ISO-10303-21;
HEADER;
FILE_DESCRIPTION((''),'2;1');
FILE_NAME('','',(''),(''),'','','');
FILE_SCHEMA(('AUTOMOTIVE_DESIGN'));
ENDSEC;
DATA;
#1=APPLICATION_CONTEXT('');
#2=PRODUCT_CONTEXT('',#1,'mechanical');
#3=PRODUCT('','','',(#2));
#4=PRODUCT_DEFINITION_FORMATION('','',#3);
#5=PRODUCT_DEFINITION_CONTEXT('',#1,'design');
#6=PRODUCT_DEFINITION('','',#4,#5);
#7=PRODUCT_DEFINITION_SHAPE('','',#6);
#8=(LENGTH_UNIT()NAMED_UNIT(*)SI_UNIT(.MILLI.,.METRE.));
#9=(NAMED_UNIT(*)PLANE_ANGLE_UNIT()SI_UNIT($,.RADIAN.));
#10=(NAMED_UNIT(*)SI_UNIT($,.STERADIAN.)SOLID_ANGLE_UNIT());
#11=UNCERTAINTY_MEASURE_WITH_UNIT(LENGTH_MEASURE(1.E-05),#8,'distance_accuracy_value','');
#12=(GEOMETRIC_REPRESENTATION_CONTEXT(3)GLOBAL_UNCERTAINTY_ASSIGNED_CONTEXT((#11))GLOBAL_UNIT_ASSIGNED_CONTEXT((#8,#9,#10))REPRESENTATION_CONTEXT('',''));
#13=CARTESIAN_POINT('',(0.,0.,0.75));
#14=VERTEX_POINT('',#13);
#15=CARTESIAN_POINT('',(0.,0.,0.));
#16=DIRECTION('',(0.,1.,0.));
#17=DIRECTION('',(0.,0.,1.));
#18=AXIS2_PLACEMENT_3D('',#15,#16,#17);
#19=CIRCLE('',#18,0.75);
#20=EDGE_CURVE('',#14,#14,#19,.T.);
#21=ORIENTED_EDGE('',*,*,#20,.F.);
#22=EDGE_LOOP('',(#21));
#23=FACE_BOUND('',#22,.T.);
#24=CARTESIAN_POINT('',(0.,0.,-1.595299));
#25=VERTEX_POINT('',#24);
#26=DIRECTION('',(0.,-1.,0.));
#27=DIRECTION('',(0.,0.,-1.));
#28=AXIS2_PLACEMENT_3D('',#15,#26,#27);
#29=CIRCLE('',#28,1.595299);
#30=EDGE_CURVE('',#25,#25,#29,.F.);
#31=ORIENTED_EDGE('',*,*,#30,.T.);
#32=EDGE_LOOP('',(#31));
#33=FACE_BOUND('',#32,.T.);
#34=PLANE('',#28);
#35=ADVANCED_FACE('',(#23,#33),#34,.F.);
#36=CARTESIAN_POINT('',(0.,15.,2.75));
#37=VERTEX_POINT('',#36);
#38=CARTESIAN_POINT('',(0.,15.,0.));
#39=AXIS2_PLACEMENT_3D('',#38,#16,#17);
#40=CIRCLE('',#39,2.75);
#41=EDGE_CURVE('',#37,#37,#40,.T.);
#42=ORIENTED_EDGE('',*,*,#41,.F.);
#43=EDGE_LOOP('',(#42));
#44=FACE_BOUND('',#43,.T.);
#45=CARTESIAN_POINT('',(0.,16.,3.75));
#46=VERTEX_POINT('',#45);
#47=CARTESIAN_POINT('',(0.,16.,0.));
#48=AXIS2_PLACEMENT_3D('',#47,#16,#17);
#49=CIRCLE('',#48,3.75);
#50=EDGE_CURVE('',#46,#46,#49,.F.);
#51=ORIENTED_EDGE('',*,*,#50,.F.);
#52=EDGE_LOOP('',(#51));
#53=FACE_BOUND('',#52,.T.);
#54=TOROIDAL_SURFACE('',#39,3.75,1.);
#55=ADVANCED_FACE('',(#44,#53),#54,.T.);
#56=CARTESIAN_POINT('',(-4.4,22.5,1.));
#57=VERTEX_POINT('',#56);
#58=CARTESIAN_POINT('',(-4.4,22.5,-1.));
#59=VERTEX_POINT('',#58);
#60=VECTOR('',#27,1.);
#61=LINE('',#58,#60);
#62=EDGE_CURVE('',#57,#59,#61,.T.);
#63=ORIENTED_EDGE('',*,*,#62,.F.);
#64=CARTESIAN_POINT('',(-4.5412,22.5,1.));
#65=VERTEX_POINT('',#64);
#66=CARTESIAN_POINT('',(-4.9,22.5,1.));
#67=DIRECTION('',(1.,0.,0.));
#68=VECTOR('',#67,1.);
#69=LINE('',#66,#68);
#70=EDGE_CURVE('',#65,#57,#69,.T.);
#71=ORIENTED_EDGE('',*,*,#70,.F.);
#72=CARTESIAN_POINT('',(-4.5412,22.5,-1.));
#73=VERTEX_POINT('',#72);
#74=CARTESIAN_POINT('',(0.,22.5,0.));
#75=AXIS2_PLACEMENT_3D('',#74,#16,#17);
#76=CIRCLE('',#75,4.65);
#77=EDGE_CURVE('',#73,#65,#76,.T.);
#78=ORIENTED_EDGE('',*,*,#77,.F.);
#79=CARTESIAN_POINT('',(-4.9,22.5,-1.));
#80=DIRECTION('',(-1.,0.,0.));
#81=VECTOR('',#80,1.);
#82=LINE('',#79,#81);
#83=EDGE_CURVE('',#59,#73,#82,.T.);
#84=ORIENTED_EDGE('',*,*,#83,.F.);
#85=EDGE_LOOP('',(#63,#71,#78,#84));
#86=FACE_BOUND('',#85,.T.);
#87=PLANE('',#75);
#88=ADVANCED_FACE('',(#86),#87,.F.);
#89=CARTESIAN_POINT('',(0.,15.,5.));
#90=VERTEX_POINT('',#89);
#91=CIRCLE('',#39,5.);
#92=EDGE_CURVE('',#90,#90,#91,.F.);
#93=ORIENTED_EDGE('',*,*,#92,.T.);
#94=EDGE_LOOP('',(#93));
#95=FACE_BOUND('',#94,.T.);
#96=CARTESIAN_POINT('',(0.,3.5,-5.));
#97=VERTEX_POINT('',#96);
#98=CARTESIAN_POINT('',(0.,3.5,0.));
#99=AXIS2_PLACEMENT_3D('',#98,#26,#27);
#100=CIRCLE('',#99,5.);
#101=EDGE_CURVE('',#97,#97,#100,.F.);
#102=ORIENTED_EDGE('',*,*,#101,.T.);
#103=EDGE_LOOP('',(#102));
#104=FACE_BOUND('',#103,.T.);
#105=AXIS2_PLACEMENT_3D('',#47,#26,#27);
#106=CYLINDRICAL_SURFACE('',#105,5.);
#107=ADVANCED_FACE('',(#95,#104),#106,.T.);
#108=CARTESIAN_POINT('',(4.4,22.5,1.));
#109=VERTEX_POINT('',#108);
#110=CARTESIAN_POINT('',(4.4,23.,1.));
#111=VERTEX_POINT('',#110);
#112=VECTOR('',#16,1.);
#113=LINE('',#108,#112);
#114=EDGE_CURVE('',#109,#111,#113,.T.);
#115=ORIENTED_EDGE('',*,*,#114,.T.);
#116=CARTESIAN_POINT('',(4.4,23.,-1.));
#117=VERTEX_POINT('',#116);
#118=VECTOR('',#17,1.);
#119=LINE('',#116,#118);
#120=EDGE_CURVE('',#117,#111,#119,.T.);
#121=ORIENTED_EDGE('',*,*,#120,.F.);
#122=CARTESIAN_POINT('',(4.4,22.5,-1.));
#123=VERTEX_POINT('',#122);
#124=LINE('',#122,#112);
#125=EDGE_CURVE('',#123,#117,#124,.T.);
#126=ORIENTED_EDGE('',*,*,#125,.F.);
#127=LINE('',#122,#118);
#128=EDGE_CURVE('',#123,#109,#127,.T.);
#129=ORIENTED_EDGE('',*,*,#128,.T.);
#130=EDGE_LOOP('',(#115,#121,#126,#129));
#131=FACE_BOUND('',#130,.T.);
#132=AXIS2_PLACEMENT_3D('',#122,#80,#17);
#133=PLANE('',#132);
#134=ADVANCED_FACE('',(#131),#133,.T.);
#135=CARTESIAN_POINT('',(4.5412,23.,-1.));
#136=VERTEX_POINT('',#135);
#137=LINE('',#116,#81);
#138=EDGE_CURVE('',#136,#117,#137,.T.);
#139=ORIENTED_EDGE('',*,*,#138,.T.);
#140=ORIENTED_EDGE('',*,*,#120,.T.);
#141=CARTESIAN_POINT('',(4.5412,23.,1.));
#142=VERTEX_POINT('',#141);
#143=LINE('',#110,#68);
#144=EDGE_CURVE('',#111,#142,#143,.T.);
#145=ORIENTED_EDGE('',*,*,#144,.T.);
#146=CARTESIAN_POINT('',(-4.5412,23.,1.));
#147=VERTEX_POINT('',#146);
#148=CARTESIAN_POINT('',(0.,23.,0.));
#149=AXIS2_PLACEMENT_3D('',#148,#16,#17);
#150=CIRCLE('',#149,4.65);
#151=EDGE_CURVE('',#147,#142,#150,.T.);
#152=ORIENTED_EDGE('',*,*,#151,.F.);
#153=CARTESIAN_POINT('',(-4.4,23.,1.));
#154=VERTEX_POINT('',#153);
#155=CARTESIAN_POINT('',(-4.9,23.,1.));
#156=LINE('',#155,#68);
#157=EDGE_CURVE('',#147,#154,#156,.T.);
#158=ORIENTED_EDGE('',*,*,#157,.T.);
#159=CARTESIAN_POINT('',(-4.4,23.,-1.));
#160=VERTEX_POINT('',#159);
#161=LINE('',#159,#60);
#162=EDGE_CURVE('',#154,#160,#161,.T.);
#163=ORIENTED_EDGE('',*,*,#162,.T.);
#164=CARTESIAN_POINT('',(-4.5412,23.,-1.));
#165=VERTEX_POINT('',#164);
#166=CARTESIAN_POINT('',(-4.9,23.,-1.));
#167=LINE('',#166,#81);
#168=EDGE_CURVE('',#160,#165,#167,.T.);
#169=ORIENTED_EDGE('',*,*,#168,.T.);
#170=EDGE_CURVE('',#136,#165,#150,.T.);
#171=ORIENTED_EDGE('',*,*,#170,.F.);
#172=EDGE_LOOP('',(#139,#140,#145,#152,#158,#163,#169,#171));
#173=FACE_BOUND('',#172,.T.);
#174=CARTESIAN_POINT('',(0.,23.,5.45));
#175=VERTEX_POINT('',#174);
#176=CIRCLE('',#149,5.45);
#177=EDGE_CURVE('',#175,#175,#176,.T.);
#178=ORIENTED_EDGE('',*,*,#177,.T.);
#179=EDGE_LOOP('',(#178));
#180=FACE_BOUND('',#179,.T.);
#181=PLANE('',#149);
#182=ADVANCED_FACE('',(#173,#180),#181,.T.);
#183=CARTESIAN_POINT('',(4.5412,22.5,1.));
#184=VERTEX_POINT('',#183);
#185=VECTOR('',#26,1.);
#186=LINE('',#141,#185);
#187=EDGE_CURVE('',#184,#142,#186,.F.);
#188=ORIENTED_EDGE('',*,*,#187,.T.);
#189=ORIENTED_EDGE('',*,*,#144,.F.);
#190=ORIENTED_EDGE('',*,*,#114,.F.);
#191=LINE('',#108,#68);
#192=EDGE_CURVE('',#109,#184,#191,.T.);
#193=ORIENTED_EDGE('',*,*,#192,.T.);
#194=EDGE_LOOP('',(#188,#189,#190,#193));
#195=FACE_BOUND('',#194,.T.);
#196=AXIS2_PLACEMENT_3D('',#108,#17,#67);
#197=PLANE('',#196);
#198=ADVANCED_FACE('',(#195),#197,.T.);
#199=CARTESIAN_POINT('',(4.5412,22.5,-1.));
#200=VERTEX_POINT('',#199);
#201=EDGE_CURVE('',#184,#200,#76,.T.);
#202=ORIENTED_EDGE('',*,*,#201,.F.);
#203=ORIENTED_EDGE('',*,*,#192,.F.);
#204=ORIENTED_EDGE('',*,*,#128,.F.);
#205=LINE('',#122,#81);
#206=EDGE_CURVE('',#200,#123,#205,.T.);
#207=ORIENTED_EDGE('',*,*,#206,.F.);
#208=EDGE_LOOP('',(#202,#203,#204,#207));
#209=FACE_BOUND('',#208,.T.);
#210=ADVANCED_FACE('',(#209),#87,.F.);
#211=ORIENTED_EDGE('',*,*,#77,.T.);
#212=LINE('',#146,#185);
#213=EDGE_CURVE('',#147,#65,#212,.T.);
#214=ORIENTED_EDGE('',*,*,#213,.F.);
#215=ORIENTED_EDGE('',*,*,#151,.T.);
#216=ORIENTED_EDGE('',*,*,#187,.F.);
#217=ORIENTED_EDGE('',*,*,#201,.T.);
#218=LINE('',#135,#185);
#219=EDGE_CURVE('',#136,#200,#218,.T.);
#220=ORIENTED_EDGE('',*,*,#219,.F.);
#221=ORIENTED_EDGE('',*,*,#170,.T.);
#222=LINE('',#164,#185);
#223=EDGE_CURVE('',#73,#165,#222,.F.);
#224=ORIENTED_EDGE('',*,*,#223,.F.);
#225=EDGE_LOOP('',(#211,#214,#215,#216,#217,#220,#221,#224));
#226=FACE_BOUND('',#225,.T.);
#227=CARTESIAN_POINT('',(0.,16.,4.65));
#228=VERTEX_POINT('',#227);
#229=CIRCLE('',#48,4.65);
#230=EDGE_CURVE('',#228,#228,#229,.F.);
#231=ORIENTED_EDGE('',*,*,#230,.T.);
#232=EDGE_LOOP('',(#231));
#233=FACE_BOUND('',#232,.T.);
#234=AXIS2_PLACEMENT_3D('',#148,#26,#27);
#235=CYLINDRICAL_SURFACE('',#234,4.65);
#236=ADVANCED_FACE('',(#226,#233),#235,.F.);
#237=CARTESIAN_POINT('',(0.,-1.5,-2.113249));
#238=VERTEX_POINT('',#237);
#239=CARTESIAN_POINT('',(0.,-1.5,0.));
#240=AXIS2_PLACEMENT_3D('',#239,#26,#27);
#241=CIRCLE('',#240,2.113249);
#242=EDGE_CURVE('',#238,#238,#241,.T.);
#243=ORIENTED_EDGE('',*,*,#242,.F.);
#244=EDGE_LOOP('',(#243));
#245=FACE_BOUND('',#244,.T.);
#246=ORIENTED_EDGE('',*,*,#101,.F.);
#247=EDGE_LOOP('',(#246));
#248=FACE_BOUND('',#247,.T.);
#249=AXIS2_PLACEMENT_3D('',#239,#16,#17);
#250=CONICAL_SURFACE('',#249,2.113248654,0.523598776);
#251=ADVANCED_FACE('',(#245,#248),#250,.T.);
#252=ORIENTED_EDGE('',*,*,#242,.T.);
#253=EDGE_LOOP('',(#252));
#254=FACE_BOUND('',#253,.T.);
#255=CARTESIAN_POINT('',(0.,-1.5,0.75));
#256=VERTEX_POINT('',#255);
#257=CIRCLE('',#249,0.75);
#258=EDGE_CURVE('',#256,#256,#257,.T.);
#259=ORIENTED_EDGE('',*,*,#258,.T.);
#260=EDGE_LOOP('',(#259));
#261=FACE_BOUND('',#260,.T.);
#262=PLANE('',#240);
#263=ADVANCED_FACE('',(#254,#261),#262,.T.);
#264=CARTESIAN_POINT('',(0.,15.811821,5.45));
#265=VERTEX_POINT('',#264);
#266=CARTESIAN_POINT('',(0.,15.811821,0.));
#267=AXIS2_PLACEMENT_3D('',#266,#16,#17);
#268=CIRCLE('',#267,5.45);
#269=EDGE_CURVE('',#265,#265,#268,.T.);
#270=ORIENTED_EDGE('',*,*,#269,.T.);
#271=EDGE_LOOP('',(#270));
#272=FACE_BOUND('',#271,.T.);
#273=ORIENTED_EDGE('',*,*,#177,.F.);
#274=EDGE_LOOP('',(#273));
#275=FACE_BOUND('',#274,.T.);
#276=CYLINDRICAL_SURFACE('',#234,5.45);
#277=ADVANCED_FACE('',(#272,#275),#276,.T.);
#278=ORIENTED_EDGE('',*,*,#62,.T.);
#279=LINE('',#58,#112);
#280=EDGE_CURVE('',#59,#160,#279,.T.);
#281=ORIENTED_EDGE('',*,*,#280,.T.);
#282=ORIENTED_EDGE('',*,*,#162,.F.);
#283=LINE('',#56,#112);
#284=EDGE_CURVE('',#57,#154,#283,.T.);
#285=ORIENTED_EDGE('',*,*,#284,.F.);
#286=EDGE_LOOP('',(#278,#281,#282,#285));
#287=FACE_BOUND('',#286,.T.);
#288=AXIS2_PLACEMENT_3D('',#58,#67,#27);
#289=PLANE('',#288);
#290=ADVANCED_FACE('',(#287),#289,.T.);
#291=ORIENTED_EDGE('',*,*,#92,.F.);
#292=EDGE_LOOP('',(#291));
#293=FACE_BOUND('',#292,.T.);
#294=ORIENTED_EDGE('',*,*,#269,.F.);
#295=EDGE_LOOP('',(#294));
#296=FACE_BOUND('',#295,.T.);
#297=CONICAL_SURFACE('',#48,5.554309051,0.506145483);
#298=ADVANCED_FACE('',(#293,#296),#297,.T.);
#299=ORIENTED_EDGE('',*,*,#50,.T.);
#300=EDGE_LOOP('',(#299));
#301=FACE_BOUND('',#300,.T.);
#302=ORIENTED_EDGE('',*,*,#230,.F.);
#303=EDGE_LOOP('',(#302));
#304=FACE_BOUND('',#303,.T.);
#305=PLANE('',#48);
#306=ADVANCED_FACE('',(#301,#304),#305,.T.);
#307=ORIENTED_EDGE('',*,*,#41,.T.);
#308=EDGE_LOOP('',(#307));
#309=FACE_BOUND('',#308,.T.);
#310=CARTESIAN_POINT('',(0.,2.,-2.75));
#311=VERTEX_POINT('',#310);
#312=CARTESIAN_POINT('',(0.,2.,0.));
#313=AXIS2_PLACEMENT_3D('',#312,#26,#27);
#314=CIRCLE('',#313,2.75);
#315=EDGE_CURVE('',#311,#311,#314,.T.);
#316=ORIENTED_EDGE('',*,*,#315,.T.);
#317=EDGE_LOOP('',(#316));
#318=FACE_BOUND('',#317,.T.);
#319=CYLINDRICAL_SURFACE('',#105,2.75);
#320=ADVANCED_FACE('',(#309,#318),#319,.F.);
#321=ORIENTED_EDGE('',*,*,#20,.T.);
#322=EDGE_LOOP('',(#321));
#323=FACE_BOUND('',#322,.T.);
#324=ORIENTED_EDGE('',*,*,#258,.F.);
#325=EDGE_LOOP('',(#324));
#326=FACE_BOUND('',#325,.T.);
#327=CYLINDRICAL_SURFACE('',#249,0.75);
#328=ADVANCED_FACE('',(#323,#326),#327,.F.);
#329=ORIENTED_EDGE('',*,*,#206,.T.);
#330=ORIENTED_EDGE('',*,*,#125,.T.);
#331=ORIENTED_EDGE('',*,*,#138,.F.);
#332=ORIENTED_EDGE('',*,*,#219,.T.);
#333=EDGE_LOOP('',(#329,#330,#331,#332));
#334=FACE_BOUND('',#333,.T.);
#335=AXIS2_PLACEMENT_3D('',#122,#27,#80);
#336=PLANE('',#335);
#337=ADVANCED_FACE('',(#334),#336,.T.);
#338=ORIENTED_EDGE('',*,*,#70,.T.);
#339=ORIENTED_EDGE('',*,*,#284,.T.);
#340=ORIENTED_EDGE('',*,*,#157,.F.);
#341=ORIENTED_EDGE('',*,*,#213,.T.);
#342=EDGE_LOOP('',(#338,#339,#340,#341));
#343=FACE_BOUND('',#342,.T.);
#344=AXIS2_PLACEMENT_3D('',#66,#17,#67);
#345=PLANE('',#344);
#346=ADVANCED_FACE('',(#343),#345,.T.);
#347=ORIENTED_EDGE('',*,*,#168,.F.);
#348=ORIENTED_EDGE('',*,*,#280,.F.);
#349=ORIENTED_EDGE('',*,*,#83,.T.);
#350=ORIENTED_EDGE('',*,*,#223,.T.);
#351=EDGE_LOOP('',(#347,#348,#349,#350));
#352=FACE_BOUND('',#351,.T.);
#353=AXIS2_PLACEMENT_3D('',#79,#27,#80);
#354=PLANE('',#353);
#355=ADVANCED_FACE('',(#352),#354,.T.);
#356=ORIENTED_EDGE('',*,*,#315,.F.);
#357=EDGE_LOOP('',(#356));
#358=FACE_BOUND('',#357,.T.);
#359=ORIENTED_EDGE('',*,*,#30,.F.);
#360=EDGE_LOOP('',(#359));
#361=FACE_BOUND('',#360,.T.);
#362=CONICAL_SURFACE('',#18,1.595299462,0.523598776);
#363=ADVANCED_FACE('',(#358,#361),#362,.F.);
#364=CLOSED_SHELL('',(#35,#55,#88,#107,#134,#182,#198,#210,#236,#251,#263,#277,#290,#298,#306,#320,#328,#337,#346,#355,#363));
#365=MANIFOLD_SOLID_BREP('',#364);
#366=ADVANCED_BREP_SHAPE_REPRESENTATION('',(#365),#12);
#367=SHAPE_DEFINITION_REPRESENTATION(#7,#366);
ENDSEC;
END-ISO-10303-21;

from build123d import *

# Parameters (mm, degrees)
SKETCH1_R           = 5
SKETCH1_R_2         = 2.75
BOSS_EXTRUDE1_DEPTH = 16
BOSS_EXTRUDE2_START = 1.5
SKETCH2_R           = 5
BOSS_EXTRUDE2_DEPTH = 1.5
SKETCH3_R           = 0.75
CUT_EXTRUDE1_DEPTH  = 1.5
CHAMFER1_SIZE       = 5
CHAMFER1_SIZE2      = 2.886751346
CHAMFER2_SIZE       = 2
CHAMFER2_SIZE2      = 1.154700538
FILLET1_R           = 1
SKETCH5_R           = 5.45
SKETCH5_R_2         = 4.65
BOSS_EXTRUDE4_DEPTH = 7
CHAMFER4_SIZE       = 0.554309051
CHAMFER4_SIZE_2     = 1
SKETCH6_W           = 0.5
SKETCH6_H           = 2
BOSS_EXTRUDE5_DEPTH = 0.5


with BuildPart() as part:
    # Sketch1 → Boss-Extrude1 (new body)
    with BuildSketch(Plane(origin=(0, 0, 0), x_dir=(1, 0, 0), z_dir=(0, 1, 0))):
        with Locations(Location((0, 0, 0), (0, 0, 270))):
            Circle(SKETCH1_R)
        with Locations(Location((0, 0, 0), (0, 0, 270))):
            Circle(SKETCH1_R_2, mode=Mode.SUBTRACT)
    extrude(amount=BOSS_EXTRUDE1_DEPTH)

    # Sketch2 → Boss-Extrude2 (add)
    with BuildSketch(Plane.XZ.offset(BOSS_EXTRUDE2_START)):
        with Locations(Location((0, 0, 0), (0, 0, 270))):
            Circle(SKETCH2_R)
    extrude(amount=-BOSS_EXTRUDE2_DEPTH)

    # Sketch3 → Cut-Extrude1 (cut)
    with BuildSketch(Plane(origin=(0, 0, 0), x_dir=(1, 0, 0), z_dir=(0, 1, 0))):
        with Locations(Location((0, 0, 0), (0, 0, 270))):
            Circle(SKETCH3_R)
    extrude(amount=-CUT_EXTRUDE1_DEPTH, mode=Mode.SUBTRACT)

    # Chamfer1
    chamfer1_edges = [part.edges().sort_by_distance(p)[0] for p in [
        (0, -1.5, 5),
    ]]
    chamfer1_side = [part.faces().sort_by_distance(p)[0] for p in [
        (0, -0.75, 5),
    ]]
    chamfer(chamfer1_edges, length=CHAMFER1_SIZE, length2=CHAMFER1_SIZE2, reference=chamfer1_side[0])

    # Chamfer2
    chamfer2_edges = [part.edges().sort_by_distance(p)[0] for p in [
        (0, 0, -2.75),
    ]]
    chamfer2_side = [part.faces().sort_by_distance(p)[0] for p in [
        (0, 8, -2.75),
    ]]
    chamfer(chamfer2_edges, length=CHAMFER2_SIZE, length2=CHAMFER2_SIZE2, reference=chamfer2_side[0])

    # Fillet1
    fillet1_edges = [part.edges().sort_by_distance(p)[0] for p in [
        (0, 16, -2.75),
    ]]
    fillet(fillet1_edges, radius=FILLET1_R)

    # Sketch5 → Boss-Extrude4 (add)
    with BuildSketch(Plane(origin=(0, 16, 0), x_dir=(1, 0, 0), z_dir=(0, 1, 0))):
        with Locations(Location((0, 0, 0), (0, 0, 270))):
            Circle(SKETCH5_R)
        with Locations(Location((0, 0, 0), (0, 0, 270))):
            Circle(SKETCH5_R_2, mode=Mode.SUBTRACT)
    extrude(amount=BOSS_EXTRUDE4_DEPTH)

    # Chamfer4
    # the kernel refuses this chamfer: 1, 0.554309051 mm, written as the material it adds along each edge
    with BuildSketch(Plane(origin=(0, 16, 0), x_dir=(0, 0, 1), z_dir=(-1, 0, 0))) as chamfer4_piece_1_section:
        Polygon((5 + CHAMFER4_SIZE, 0), (5, -CHAMFER4_SIZE_2), (5, 0), align=None)
    chamfer4_piece_1 = revolve(axis=Axis((0, 16, 0), (0, 1, 0)), mode=Mode.PRIVATE)
    chamfer4_piece_1 = chamfer4_piece_1 & Plane(origin=(0, 15.398774121, 0), x_dir=(0, 0, 1), z_dir=(0, -1, 0)) * Cylinder(5.45, 23, mode=Mode.PRIVATE)
    add(chamfer4_piece_1)

    # Sketch6 → Boss-Extrude5 (add)
    with BuildSketch(Plane(origin=(0, 23, 0), x_dir=(1, 0, 0), z_dir=(0, 1, 0))):
        with Locations((4.65, 0)):
            Rectangle(SKETCH6_W, SKETCH6_H)
        with Locations((-4.65, 0)):
            Rectangle(SKETCH6_W, SKETCH6_H)
    extrude(amount=-BOSS_EXTRUDE5_DEPTH)


solid = part.part
